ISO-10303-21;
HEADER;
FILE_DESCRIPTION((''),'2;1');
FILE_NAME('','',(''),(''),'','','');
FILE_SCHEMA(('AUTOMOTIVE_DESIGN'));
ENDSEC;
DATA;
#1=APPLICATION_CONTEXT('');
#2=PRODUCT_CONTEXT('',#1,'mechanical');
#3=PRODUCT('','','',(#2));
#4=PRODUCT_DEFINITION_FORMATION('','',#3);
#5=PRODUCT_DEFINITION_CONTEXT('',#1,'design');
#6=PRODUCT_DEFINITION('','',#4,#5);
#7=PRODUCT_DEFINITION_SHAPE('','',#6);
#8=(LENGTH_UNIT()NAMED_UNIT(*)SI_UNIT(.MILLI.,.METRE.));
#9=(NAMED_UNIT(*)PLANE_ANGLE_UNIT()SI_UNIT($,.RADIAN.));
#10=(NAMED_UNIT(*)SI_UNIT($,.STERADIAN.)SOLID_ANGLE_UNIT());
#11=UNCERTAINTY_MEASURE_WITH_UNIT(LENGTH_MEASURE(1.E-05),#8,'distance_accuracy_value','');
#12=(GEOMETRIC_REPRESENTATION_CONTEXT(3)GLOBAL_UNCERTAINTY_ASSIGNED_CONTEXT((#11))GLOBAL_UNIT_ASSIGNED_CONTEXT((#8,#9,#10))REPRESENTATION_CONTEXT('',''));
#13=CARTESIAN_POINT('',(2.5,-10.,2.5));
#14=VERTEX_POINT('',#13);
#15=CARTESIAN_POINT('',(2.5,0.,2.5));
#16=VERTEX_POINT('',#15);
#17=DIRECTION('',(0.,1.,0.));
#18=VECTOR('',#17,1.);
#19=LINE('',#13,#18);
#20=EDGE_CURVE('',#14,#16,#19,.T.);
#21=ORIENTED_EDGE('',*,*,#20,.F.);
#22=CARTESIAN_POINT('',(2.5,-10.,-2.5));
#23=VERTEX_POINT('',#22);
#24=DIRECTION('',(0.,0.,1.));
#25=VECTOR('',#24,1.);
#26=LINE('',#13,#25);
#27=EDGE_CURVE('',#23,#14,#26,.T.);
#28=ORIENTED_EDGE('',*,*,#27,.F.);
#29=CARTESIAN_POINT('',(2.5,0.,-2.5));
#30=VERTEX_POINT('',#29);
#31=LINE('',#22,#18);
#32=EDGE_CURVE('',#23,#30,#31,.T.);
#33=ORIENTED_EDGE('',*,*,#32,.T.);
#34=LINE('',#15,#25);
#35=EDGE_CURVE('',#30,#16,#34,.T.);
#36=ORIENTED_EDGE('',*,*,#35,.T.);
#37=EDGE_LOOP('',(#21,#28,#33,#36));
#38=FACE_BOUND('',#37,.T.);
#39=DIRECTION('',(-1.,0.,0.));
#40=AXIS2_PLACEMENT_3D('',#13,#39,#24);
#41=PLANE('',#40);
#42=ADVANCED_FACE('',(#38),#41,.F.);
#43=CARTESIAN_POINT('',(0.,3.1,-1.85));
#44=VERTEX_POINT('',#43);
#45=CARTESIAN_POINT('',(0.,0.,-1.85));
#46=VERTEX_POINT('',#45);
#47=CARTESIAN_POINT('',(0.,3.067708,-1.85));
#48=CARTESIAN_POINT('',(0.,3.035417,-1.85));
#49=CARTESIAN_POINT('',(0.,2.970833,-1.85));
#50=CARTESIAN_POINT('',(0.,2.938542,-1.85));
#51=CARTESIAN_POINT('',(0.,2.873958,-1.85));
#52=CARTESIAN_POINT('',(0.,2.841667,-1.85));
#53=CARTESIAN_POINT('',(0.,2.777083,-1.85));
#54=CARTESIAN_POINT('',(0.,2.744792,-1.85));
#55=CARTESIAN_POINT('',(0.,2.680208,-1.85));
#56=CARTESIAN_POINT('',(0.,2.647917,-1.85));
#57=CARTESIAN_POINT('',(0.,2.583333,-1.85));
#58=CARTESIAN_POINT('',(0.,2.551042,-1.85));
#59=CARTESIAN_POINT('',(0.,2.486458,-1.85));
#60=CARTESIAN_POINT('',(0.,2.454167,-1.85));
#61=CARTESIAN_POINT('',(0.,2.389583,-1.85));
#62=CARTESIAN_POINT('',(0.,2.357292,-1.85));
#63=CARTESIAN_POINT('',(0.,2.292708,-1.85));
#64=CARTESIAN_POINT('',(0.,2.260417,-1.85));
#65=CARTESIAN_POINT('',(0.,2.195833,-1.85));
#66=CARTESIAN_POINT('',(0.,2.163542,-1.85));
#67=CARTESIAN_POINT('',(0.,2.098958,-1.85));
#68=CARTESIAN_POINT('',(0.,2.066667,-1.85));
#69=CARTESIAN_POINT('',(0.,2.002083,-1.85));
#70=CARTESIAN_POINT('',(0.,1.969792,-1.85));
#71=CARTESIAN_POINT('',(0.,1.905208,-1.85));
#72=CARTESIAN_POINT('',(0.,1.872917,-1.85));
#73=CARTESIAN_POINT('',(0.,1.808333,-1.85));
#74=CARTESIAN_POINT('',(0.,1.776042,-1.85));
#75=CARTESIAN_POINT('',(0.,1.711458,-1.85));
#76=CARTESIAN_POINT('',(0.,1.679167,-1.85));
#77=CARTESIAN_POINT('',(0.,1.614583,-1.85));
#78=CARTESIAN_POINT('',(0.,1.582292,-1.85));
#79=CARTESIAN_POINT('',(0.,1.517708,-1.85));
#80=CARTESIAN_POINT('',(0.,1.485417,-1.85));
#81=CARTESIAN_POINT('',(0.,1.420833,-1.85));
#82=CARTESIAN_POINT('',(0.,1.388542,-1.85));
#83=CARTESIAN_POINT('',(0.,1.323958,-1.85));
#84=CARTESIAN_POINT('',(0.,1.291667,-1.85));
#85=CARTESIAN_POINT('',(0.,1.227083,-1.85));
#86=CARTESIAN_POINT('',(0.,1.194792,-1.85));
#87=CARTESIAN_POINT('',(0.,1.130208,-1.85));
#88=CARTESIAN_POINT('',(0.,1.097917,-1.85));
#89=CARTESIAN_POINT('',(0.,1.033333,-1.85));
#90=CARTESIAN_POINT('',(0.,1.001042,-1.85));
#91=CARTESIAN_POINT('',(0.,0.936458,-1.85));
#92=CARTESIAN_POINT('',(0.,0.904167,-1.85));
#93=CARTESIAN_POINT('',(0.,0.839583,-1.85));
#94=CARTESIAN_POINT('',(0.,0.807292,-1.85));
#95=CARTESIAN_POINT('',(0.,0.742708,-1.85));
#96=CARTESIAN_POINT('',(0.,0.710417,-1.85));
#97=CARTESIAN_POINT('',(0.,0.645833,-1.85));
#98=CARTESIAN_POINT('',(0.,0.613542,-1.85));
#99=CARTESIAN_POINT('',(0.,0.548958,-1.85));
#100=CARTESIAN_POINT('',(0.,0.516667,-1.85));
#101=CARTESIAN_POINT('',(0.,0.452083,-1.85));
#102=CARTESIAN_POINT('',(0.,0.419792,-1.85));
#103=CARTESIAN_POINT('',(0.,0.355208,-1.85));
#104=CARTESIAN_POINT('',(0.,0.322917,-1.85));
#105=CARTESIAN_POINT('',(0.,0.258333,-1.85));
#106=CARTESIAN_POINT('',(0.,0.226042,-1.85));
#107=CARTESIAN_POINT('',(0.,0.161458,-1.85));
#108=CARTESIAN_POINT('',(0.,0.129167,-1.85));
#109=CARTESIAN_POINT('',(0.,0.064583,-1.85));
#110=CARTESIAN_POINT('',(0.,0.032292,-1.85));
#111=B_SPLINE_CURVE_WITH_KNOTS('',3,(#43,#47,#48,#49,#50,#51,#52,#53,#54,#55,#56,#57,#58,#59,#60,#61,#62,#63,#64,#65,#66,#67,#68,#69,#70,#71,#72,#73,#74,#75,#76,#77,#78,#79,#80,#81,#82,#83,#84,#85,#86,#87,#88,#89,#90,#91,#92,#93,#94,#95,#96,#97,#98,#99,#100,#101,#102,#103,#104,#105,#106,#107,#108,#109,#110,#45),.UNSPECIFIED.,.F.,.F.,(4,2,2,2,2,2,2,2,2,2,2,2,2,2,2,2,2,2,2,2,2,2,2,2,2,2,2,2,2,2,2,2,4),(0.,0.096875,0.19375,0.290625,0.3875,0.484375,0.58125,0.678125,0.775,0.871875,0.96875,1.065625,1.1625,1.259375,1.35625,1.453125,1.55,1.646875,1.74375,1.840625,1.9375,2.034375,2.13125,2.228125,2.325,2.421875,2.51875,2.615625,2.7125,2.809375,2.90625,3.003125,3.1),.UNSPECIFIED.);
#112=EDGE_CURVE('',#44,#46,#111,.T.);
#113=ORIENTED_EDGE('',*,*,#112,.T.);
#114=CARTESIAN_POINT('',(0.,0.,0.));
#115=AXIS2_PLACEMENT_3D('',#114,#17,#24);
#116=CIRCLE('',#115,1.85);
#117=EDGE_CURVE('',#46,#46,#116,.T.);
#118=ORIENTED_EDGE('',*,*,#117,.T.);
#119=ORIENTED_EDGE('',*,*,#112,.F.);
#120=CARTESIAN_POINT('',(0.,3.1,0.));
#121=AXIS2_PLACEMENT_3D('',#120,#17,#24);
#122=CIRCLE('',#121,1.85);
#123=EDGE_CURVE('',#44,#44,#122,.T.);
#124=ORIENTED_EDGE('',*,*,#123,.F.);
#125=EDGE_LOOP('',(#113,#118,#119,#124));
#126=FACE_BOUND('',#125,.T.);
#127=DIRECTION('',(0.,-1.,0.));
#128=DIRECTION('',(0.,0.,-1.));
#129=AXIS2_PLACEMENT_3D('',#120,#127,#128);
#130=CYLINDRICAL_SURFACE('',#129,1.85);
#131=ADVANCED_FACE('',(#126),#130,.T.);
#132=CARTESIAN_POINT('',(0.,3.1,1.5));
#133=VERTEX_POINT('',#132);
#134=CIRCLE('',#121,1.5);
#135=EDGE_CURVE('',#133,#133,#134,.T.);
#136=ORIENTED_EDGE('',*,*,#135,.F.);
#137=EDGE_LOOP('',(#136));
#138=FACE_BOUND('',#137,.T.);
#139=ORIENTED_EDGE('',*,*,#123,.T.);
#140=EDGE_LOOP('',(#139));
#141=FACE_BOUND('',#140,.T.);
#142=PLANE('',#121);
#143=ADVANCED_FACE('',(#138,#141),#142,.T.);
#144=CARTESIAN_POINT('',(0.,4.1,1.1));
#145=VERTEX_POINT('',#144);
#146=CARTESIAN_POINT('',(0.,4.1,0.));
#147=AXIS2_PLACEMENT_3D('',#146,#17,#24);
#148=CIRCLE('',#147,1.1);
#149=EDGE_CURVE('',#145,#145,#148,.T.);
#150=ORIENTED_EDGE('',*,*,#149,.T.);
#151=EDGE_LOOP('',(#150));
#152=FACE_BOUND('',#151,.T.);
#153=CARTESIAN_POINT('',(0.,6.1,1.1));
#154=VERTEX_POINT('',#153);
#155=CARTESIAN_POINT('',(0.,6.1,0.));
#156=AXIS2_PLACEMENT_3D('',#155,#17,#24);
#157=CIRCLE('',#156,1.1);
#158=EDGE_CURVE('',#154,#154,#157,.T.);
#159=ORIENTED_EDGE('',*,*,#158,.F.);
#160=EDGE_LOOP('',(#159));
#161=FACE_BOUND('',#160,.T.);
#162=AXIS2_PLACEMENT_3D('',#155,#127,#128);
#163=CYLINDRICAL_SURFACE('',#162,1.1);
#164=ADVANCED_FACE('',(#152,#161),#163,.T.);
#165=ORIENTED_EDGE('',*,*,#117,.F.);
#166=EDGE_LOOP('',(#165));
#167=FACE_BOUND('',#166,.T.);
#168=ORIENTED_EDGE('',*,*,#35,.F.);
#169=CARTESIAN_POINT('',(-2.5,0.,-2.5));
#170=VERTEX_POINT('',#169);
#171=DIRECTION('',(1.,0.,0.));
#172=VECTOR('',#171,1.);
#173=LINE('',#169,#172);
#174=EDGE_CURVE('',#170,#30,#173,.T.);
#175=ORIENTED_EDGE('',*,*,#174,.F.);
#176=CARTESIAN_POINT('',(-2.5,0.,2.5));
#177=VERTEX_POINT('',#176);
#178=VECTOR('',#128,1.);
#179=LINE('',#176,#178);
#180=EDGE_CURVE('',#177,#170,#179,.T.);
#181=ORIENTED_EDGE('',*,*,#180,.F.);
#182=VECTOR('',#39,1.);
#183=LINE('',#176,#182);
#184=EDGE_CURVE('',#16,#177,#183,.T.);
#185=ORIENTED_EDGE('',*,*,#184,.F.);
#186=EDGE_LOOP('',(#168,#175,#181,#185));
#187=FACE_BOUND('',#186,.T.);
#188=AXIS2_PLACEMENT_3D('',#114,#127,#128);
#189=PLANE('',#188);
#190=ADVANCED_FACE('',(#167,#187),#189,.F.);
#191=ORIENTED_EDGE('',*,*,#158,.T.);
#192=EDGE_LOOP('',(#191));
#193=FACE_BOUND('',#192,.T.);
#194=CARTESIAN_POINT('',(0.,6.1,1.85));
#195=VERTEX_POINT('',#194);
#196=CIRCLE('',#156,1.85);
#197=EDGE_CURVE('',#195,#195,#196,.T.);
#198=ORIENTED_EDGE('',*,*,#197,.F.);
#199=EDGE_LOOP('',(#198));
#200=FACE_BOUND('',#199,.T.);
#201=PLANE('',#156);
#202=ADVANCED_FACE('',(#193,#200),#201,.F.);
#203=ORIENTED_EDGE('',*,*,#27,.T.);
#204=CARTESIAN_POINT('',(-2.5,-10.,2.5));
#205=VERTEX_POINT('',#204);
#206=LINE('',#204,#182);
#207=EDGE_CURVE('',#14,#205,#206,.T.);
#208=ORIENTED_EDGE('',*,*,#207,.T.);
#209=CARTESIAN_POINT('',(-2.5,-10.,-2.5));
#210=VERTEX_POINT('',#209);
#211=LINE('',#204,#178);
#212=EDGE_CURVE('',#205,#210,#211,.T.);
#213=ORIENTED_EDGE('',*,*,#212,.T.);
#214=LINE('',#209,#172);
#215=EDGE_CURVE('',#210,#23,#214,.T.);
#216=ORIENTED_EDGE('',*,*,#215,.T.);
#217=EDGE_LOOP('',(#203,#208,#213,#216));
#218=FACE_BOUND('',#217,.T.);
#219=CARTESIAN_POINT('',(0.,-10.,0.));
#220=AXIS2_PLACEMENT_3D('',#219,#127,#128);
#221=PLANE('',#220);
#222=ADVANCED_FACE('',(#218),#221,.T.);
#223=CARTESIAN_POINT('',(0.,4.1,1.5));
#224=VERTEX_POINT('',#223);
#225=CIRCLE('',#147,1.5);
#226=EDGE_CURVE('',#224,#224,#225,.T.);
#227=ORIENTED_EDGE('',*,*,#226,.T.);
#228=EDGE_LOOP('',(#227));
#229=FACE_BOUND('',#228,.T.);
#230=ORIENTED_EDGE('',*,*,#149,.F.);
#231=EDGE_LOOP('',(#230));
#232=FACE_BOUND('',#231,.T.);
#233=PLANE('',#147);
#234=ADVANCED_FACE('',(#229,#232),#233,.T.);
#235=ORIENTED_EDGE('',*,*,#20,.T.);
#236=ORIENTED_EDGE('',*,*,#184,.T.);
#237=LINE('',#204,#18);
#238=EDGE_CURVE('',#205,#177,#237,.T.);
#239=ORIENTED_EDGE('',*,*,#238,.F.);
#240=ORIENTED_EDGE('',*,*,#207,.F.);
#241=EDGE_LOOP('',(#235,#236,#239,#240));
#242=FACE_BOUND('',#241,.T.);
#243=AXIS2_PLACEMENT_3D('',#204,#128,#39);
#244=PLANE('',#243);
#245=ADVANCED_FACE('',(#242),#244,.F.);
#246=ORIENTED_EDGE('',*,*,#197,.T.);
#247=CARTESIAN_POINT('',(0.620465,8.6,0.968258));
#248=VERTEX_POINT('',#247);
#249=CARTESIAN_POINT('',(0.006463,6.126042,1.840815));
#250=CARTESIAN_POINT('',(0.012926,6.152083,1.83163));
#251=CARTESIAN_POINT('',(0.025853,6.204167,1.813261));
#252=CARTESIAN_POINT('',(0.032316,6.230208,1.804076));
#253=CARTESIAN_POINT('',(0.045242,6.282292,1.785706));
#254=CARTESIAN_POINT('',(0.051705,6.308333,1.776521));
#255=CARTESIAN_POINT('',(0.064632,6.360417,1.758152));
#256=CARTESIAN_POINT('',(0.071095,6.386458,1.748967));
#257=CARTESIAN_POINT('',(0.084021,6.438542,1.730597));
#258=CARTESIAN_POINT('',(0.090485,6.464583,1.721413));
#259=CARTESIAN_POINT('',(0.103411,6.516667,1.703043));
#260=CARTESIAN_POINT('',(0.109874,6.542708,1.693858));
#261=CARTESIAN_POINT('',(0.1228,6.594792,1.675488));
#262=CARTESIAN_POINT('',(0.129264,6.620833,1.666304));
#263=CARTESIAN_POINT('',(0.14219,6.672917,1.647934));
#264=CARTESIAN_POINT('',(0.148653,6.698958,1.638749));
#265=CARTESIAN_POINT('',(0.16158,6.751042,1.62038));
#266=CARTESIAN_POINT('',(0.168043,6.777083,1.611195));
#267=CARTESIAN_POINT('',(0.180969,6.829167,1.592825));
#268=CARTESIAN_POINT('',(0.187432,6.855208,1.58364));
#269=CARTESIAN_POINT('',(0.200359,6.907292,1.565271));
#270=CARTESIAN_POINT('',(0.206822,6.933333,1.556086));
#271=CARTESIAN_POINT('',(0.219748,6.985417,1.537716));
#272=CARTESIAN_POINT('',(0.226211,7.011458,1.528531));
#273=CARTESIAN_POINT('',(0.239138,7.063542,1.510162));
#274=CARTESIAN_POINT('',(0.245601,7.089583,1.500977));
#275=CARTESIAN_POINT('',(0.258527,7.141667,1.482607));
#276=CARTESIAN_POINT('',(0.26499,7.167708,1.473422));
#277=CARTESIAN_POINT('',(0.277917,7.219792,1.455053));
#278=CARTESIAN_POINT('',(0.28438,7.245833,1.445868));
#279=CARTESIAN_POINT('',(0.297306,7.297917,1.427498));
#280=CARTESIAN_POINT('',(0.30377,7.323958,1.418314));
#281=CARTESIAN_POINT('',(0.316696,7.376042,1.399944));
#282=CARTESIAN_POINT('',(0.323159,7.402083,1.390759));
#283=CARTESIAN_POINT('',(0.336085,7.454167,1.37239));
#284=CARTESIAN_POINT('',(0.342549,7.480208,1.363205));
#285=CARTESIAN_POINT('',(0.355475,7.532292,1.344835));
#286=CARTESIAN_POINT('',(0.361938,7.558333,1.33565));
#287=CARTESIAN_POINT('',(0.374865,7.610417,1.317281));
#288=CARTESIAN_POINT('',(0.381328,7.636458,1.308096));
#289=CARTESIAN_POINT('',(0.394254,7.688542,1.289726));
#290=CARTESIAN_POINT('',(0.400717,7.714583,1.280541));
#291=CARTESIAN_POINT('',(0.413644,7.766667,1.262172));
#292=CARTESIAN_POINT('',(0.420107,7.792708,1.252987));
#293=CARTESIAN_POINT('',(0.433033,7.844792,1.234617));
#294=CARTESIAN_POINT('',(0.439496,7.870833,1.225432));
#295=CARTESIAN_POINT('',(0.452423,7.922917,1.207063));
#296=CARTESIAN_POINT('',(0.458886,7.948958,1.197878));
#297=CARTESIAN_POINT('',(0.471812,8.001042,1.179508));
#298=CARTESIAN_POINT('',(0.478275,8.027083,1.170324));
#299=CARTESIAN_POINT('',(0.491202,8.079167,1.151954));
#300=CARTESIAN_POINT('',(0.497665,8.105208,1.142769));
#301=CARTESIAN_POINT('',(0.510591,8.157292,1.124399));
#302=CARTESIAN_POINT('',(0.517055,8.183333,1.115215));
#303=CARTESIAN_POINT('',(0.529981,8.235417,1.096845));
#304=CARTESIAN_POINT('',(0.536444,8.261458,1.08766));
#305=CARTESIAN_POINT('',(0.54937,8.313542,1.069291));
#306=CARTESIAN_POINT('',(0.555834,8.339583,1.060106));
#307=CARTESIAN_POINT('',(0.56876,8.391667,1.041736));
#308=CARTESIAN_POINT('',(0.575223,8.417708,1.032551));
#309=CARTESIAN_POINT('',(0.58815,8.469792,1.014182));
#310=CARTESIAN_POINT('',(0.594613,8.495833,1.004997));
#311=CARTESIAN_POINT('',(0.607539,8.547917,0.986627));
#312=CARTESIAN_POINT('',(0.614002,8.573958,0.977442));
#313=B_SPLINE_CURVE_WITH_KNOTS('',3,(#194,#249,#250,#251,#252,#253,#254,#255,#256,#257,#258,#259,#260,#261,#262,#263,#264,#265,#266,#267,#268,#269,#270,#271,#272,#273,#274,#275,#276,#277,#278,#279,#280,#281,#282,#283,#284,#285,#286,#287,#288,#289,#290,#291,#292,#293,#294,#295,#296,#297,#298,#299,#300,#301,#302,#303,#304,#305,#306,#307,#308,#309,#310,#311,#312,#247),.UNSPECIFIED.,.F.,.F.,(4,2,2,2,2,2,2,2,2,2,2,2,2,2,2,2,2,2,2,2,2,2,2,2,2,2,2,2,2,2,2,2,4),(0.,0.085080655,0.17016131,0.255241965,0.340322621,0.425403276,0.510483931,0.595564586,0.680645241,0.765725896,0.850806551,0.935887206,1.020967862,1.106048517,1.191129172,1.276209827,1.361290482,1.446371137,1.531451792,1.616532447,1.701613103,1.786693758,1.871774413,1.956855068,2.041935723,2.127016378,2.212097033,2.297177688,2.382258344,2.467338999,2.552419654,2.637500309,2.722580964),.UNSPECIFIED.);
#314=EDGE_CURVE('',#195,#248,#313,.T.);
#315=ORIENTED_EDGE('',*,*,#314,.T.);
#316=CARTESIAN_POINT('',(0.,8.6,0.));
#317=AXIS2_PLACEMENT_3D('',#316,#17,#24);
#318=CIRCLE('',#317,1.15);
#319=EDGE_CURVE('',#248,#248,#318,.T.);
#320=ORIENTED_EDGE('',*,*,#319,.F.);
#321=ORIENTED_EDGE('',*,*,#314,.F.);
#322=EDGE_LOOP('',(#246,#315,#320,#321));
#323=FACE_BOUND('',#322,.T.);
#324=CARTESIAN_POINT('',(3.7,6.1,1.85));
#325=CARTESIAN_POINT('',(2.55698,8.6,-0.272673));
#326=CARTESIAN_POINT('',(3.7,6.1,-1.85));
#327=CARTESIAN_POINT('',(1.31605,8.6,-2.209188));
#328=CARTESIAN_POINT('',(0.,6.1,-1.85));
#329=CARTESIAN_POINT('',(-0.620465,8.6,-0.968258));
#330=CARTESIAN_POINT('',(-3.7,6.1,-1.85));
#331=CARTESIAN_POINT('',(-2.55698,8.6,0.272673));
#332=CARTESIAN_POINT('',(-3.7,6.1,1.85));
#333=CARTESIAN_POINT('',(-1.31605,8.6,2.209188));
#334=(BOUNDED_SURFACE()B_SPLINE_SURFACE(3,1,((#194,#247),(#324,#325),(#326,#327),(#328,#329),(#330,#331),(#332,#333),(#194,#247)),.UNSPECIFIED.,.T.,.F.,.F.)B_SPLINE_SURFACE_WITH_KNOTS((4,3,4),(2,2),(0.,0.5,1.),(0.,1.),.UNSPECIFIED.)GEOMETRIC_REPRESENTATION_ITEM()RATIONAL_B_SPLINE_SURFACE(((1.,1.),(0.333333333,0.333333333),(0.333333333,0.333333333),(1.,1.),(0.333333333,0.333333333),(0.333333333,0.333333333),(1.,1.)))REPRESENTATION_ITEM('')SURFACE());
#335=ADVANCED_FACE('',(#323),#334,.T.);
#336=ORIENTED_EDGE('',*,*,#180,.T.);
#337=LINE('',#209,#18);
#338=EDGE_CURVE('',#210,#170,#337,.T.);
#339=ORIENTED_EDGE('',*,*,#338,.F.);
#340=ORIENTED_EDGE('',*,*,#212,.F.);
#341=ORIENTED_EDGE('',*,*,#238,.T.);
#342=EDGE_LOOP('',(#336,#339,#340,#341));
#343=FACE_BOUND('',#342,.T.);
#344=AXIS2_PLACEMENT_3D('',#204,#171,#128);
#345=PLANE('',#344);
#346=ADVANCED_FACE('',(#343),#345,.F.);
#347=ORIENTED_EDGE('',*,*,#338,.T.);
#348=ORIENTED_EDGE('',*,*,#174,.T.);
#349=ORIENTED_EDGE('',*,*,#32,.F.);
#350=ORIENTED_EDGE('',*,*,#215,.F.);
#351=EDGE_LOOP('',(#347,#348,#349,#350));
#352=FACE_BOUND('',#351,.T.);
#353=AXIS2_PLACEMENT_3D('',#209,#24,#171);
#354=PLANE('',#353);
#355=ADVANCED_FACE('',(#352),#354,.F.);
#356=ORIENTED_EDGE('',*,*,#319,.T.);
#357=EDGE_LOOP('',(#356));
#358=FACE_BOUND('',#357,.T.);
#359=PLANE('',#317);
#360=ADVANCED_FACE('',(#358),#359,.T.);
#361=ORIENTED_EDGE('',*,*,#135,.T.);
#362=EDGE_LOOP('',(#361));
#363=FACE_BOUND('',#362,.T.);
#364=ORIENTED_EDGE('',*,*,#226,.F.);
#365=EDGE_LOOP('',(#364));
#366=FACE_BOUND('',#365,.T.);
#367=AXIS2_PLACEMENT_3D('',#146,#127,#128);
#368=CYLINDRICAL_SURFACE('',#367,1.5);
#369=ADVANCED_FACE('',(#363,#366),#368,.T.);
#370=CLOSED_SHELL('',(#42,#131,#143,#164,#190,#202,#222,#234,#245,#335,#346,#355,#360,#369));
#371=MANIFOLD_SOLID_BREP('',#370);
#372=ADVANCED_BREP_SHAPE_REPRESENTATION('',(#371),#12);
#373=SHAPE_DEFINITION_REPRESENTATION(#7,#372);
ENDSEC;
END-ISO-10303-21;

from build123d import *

# Parameters (mm, degrees)
SKETCH1_R           = 1.85
BOSS_EXTRUDE1_DEPTH = 3.1
SKETCH2_R           = 1.5
BOSS_EXTRUDE2_DEPTH = 1
SKETCH3_R           = 1.1
BOSS_EXTRUDE3_DEPTH = 2
SKETCH6_W           = 5
SKETCH6_H           = 5
BOSS_EXTRUDE4_DEPTH = 10


with BuildPart() as part:
    # Sketch1 → Boss-Extrude1 (new body)
    with BuildSketch(Plane(origin=(0, 0, 0), x_dir=(1, 0, 0), z_dir=(0, 1, 0))):
        with Locations(Location((0, 0, 0), (0, 0, 90))):
            Circle(SKETCH1_R)
    extrude(amount=BOSS_EXTRUDE1_DEPTH)

    # Sketch2 → Boss-Extrude2 (add)
    with BuildSketch(Plane(origin=(0, 3.1, 0), x_dir=(1, 0, 0), z_dir=(0, 1, 0))):
        with Locations(Location((0, 0, 0), (0, 0, 270))):
            Circle(SKETCH2_R)
    extrude(amount=BOSS_EXTRUDE2_DEPTH)

    # Sketch3 → Boss-Extrude3 (add)
    with BuildSketch(Plane(origin=(0, 4.1, 0), x_dir=(1, 0, 0), z_dir=(0, 1, 0))):
        with Locations(Location((0, 0, 0), (0, 0, 270))):
            Circle(SKETCH3_R)
    extrude(amount=BOSS_EXTRUDE3_DEPTH)

    # Loft1: read off the stored shape, not the designer's step
    # Loft1: loft between two sections, ruled curve by curve
    loft1_from = [
        Edge.make_bspline([(0, 6.1, 1.85), (3.7, 6.1, 1.85), (3.7, 6.1, -1.85), (0, 6.1, -1.85), (-3.7, 6.1, -1.85), (-3.7, 6.1, 1.85), (0, 6.1, 1.85)], [0, 0, 0, 0, 0.5, 0.5, 0.5, 1, 1, 1, 1], 3, [1, 0.333333333, 0.333333333, 1, 0.333333333, 0.333333333, 1]),
    ]
    loft1_to = [
        Edge.make_bspline([(0.620465421, 8.6, 0.968257539), (2.556980499, 8.6, -0.272673303), (1.316049657, 8.6, -2.209188381), (-0.620465421, 8.6, -0.968257539), (-2.556980499, 8.6, 0.272673303), (-1.316049657, 8.6, 2.209188381), (0.620465421, 8.6, 0.968257539)], [0, 0, 0, 0, 0.5, 0.5, 0.5, 1, 1, 1, 1], 3, [1, 0.333333333, 0.333333333, 1, 0.333333333, 0.333333333, 1]),
    ]
    loft1 = Solid(Shell([*[Face.make_surface_from_curves(loft1_from[k], loft1_to[k]) for k in range(1)], Face(Wire(loft1_from)), Face(Wire(loft1_to))]))
    add(loft1)

    # Sketch6 → Boss-Extrude4 (add)
    with BuildSketch(Plane.XZ):
        Rectangle(SKETCH6_W, SKETCH6_H)
    extrude(amount=BOSS_EXTRUDE4_DEPTH)


solid = part.part
